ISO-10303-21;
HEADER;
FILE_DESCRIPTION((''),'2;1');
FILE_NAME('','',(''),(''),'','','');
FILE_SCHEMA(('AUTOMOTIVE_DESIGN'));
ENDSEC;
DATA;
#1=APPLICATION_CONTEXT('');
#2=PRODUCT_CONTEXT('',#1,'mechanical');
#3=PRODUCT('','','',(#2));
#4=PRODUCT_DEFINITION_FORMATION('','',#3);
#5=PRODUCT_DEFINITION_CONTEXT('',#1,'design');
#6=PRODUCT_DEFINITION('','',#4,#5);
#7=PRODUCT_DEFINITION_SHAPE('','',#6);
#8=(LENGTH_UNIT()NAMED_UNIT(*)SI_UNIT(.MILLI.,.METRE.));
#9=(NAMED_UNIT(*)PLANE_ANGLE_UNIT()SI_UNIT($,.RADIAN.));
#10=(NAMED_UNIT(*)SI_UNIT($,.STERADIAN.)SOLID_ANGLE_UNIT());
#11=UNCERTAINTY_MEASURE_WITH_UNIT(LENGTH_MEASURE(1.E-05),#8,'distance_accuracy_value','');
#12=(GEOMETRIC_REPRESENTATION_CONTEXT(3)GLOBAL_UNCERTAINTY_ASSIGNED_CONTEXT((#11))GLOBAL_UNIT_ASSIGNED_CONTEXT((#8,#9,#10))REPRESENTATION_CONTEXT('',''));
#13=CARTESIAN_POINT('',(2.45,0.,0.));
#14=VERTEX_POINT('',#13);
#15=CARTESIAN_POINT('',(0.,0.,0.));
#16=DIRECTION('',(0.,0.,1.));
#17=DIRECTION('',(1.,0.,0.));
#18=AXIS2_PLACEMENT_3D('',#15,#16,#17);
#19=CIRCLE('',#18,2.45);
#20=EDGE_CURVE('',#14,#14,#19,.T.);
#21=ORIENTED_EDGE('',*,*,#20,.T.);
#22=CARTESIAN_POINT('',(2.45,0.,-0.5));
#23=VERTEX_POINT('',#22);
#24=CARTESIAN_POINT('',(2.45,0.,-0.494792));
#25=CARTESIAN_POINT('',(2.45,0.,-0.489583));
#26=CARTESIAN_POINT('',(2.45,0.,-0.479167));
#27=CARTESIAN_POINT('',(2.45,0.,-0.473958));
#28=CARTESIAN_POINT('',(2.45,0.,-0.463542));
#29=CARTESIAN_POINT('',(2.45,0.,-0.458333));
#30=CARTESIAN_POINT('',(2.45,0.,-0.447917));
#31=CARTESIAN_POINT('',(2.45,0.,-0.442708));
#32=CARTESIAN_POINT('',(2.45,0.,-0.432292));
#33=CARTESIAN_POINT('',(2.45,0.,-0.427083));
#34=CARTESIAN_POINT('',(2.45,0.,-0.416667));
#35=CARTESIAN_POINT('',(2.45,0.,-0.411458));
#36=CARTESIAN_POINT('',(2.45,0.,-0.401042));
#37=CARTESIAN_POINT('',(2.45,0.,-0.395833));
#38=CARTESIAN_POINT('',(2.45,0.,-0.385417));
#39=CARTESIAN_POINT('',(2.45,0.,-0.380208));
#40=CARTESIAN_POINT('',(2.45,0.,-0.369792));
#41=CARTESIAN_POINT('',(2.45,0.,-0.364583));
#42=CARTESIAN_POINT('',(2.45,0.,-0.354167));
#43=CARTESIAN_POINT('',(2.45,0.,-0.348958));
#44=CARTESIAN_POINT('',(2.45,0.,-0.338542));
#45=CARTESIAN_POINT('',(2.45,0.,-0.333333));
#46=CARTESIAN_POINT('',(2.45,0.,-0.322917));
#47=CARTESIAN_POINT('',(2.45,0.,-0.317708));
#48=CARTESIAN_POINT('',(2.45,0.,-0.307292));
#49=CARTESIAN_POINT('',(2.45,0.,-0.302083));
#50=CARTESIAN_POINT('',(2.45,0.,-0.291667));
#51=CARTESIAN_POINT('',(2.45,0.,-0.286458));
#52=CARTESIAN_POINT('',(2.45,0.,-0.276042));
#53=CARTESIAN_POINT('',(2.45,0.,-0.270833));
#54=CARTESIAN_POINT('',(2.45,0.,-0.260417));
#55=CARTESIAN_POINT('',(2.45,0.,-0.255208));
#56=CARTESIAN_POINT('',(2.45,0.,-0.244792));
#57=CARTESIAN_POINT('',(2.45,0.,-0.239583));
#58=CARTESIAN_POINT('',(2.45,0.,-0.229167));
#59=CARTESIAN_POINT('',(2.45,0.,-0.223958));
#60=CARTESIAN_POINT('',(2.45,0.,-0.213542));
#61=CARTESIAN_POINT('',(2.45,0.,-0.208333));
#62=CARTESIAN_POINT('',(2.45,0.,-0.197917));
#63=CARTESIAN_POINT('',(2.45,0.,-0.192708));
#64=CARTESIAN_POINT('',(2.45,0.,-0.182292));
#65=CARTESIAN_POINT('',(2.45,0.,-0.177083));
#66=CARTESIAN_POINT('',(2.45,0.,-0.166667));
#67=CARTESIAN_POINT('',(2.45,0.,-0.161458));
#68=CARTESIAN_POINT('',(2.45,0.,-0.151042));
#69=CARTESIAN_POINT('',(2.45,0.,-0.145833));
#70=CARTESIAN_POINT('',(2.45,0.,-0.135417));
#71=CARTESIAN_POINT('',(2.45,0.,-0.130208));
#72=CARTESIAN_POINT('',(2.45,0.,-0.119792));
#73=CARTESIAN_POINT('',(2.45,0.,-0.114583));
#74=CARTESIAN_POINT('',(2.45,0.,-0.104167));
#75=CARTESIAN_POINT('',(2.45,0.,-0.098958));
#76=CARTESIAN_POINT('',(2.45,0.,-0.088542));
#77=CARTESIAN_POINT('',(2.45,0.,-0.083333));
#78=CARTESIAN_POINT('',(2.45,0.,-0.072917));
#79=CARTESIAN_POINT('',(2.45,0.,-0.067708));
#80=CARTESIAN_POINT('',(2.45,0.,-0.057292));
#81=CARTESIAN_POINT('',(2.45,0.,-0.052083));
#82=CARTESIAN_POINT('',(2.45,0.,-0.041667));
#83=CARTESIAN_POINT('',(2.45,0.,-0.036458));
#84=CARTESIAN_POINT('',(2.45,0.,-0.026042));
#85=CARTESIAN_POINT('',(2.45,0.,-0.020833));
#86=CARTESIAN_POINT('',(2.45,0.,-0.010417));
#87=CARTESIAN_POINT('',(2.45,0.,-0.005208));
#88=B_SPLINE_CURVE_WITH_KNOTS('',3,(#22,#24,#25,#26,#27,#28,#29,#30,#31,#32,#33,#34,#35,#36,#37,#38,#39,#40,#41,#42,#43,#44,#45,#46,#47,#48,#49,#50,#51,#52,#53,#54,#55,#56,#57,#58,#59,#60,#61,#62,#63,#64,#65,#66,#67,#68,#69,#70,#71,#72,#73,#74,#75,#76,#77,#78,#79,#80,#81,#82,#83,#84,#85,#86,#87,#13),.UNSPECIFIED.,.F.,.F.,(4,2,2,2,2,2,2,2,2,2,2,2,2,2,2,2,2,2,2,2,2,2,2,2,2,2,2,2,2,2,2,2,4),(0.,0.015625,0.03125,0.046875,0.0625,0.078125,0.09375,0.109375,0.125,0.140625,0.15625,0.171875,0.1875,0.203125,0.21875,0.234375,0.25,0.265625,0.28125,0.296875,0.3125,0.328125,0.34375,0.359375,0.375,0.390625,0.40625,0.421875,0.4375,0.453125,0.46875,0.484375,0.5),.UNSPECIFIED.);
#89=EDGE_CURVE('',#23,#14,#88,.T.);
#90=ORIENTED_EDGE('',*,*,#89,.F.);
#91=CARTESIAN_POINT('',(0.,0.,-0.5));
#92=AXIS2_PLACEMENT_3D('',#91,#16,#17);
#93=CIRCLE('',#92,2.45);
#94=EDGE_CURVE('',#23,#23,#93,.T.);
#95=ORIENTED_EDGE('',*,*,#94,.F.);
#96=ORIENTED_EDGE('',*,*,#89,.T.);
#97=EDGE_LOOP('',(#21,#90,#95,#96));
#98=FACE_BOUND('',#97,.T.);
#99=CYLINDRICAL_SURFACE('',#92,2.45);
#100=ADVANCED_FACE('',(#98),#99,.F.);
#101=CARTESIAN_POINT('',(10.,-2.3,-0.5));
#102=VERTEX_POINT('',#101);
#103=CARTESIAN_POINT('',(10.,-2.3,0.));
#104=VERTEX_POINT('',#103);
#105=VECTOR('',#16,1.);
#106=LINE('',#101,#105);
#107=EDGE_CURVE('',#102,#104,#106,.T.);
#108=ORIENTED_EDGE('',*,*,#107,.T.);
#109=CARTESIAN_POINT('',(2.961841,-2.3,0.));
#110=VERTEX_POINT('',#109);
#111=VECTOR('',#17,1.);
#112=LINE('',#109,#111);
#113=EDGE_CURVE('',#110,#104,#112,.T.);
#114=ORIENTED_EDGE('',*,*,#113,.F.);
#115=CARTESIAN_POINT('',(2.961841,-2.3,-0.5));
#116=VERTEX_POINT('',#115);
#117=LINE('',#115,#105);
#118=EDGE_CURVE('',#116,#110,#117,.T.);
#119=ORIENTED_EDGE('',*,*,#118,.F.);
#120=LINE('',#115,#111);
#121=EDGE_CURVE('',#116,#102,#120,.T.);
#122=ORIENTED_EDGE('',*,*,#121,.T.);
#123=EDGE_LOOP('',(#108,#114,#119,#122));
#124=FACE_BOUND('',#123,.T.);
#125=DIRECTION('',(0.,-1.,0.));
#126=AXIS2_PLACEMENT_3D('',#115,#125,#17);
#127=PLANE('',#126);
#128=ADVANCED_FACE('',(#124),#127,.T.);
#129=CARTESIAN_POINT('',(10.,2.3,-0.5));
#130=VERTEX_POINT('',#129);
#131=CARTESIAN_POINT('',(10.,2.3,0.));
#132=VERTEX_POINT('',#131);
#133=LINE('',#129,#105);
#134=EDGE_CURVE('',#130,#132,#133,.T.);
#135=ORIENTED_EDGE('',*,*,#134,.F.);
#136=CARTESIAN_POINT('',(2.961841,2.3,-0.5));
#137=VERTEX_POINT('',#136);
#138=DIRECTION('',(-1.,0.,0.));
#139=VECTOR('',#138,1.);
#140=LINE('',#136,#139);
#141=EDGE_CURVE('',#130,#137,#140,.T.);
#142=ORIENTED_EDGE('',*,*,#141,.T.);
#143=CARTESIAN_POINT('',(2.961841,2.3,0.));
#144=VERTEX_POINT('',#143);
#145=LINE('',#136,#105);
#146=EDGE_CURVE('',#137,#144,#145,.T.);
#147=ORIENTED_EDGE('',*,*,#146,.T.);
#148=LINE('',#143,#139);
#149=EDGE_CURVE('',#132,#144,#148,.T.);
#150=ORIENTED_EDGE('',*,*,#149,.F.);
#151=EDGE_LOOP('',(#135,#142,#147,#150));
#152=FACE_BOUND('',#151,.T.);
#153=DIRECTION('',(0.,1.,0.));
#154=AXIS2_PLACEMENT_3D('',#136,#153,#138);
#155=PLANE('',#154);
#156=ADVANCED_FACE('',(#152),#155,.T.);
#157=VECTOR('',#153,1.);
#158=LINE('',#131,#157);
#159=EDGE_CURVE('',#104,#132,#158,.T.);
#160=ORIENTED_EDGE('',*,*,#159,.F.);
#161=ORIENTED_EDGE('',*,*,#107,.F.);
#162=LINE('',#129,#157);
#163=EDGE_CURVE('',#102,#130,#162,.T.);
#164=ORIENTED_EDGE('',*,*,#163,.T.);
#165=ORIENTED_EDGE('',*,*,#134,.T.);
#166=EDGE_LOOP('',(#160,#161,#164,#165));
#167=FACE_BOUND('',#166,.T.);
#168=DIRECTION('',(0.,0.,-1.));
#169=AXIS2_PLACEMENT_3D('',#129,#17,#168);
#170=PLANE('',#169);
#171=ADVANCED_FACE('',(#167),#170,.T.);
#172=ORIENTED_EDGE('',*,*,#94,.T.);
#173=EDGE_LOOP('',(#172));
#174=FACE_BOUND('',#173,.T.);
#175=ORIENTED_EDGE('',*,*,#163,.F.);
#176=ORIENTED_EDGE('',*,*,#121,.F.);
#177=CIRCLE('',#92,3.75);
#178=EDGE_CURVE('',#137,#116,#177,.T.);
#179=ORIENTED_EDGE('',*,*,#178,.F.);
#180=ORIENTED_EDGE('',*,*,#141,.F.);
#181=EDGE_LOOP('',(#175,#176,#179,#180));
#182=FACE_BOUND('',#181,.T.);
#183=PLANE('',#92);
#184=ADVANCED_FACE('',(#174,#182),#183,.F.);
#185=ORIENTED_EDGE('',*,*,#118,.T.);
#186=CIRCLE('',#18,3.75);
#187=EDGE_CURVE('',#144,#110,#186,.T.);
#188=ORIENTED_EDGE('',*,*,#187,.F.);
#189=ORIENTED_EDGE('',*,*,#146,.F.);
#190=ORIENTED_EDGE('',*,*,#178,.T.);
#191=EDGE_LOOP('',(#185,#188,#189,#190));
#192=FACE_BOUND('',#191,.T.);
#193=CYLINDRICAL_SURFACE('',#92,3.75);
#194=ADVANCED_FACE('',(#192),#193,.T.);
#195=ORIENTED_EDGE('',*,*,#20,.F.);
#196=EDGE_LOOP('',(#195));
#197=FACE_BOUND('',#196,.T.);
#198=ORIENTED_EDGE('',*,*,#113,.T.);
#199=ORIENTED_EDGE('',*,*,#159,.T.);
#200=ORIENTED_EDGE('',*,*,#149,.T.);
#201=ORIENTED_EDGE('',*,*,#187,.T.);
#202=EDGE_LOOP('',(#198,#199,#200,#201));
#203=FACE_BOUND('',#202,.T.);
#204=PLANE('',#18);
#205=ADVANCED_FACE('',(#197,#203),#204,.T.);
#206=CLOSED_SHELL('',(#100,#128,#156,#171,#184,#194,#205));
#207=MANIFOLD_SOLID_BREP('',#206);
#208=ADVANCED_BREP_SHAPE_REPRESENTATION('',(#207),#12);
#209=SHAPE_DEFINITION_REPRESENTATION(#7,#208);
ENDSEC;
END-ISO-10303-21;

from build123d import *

# Parameters (mm, degrees)
BODY_SKETCH_R      = 2.45
BASE_FLANGE1_DEPTH = 0.5


# Sheet-metal steps are written as plain solids
with BuildPart() as part:
    # Body Sketch → Base-Flange1 (new body)
    with BuildSketch(Plane.XY):
        with BuildLine():
            Line((2.961840644, 2.3), (10, 2.3))
            Line((10, 2.3), (10, -2.3))
            Line((10, -2.3), (2.961840644, -2.3))
            ThreePointArc((2.961840644, -2.3), (-3.75, 0), (2.961840644, 2.3))
        make_face()
        Circle(BODY_SKETCH_R, mode=Mode.SUBTRACT)
    extrude(amount=-BASE_FLANGE1_DEPTH)


solid = part.part
